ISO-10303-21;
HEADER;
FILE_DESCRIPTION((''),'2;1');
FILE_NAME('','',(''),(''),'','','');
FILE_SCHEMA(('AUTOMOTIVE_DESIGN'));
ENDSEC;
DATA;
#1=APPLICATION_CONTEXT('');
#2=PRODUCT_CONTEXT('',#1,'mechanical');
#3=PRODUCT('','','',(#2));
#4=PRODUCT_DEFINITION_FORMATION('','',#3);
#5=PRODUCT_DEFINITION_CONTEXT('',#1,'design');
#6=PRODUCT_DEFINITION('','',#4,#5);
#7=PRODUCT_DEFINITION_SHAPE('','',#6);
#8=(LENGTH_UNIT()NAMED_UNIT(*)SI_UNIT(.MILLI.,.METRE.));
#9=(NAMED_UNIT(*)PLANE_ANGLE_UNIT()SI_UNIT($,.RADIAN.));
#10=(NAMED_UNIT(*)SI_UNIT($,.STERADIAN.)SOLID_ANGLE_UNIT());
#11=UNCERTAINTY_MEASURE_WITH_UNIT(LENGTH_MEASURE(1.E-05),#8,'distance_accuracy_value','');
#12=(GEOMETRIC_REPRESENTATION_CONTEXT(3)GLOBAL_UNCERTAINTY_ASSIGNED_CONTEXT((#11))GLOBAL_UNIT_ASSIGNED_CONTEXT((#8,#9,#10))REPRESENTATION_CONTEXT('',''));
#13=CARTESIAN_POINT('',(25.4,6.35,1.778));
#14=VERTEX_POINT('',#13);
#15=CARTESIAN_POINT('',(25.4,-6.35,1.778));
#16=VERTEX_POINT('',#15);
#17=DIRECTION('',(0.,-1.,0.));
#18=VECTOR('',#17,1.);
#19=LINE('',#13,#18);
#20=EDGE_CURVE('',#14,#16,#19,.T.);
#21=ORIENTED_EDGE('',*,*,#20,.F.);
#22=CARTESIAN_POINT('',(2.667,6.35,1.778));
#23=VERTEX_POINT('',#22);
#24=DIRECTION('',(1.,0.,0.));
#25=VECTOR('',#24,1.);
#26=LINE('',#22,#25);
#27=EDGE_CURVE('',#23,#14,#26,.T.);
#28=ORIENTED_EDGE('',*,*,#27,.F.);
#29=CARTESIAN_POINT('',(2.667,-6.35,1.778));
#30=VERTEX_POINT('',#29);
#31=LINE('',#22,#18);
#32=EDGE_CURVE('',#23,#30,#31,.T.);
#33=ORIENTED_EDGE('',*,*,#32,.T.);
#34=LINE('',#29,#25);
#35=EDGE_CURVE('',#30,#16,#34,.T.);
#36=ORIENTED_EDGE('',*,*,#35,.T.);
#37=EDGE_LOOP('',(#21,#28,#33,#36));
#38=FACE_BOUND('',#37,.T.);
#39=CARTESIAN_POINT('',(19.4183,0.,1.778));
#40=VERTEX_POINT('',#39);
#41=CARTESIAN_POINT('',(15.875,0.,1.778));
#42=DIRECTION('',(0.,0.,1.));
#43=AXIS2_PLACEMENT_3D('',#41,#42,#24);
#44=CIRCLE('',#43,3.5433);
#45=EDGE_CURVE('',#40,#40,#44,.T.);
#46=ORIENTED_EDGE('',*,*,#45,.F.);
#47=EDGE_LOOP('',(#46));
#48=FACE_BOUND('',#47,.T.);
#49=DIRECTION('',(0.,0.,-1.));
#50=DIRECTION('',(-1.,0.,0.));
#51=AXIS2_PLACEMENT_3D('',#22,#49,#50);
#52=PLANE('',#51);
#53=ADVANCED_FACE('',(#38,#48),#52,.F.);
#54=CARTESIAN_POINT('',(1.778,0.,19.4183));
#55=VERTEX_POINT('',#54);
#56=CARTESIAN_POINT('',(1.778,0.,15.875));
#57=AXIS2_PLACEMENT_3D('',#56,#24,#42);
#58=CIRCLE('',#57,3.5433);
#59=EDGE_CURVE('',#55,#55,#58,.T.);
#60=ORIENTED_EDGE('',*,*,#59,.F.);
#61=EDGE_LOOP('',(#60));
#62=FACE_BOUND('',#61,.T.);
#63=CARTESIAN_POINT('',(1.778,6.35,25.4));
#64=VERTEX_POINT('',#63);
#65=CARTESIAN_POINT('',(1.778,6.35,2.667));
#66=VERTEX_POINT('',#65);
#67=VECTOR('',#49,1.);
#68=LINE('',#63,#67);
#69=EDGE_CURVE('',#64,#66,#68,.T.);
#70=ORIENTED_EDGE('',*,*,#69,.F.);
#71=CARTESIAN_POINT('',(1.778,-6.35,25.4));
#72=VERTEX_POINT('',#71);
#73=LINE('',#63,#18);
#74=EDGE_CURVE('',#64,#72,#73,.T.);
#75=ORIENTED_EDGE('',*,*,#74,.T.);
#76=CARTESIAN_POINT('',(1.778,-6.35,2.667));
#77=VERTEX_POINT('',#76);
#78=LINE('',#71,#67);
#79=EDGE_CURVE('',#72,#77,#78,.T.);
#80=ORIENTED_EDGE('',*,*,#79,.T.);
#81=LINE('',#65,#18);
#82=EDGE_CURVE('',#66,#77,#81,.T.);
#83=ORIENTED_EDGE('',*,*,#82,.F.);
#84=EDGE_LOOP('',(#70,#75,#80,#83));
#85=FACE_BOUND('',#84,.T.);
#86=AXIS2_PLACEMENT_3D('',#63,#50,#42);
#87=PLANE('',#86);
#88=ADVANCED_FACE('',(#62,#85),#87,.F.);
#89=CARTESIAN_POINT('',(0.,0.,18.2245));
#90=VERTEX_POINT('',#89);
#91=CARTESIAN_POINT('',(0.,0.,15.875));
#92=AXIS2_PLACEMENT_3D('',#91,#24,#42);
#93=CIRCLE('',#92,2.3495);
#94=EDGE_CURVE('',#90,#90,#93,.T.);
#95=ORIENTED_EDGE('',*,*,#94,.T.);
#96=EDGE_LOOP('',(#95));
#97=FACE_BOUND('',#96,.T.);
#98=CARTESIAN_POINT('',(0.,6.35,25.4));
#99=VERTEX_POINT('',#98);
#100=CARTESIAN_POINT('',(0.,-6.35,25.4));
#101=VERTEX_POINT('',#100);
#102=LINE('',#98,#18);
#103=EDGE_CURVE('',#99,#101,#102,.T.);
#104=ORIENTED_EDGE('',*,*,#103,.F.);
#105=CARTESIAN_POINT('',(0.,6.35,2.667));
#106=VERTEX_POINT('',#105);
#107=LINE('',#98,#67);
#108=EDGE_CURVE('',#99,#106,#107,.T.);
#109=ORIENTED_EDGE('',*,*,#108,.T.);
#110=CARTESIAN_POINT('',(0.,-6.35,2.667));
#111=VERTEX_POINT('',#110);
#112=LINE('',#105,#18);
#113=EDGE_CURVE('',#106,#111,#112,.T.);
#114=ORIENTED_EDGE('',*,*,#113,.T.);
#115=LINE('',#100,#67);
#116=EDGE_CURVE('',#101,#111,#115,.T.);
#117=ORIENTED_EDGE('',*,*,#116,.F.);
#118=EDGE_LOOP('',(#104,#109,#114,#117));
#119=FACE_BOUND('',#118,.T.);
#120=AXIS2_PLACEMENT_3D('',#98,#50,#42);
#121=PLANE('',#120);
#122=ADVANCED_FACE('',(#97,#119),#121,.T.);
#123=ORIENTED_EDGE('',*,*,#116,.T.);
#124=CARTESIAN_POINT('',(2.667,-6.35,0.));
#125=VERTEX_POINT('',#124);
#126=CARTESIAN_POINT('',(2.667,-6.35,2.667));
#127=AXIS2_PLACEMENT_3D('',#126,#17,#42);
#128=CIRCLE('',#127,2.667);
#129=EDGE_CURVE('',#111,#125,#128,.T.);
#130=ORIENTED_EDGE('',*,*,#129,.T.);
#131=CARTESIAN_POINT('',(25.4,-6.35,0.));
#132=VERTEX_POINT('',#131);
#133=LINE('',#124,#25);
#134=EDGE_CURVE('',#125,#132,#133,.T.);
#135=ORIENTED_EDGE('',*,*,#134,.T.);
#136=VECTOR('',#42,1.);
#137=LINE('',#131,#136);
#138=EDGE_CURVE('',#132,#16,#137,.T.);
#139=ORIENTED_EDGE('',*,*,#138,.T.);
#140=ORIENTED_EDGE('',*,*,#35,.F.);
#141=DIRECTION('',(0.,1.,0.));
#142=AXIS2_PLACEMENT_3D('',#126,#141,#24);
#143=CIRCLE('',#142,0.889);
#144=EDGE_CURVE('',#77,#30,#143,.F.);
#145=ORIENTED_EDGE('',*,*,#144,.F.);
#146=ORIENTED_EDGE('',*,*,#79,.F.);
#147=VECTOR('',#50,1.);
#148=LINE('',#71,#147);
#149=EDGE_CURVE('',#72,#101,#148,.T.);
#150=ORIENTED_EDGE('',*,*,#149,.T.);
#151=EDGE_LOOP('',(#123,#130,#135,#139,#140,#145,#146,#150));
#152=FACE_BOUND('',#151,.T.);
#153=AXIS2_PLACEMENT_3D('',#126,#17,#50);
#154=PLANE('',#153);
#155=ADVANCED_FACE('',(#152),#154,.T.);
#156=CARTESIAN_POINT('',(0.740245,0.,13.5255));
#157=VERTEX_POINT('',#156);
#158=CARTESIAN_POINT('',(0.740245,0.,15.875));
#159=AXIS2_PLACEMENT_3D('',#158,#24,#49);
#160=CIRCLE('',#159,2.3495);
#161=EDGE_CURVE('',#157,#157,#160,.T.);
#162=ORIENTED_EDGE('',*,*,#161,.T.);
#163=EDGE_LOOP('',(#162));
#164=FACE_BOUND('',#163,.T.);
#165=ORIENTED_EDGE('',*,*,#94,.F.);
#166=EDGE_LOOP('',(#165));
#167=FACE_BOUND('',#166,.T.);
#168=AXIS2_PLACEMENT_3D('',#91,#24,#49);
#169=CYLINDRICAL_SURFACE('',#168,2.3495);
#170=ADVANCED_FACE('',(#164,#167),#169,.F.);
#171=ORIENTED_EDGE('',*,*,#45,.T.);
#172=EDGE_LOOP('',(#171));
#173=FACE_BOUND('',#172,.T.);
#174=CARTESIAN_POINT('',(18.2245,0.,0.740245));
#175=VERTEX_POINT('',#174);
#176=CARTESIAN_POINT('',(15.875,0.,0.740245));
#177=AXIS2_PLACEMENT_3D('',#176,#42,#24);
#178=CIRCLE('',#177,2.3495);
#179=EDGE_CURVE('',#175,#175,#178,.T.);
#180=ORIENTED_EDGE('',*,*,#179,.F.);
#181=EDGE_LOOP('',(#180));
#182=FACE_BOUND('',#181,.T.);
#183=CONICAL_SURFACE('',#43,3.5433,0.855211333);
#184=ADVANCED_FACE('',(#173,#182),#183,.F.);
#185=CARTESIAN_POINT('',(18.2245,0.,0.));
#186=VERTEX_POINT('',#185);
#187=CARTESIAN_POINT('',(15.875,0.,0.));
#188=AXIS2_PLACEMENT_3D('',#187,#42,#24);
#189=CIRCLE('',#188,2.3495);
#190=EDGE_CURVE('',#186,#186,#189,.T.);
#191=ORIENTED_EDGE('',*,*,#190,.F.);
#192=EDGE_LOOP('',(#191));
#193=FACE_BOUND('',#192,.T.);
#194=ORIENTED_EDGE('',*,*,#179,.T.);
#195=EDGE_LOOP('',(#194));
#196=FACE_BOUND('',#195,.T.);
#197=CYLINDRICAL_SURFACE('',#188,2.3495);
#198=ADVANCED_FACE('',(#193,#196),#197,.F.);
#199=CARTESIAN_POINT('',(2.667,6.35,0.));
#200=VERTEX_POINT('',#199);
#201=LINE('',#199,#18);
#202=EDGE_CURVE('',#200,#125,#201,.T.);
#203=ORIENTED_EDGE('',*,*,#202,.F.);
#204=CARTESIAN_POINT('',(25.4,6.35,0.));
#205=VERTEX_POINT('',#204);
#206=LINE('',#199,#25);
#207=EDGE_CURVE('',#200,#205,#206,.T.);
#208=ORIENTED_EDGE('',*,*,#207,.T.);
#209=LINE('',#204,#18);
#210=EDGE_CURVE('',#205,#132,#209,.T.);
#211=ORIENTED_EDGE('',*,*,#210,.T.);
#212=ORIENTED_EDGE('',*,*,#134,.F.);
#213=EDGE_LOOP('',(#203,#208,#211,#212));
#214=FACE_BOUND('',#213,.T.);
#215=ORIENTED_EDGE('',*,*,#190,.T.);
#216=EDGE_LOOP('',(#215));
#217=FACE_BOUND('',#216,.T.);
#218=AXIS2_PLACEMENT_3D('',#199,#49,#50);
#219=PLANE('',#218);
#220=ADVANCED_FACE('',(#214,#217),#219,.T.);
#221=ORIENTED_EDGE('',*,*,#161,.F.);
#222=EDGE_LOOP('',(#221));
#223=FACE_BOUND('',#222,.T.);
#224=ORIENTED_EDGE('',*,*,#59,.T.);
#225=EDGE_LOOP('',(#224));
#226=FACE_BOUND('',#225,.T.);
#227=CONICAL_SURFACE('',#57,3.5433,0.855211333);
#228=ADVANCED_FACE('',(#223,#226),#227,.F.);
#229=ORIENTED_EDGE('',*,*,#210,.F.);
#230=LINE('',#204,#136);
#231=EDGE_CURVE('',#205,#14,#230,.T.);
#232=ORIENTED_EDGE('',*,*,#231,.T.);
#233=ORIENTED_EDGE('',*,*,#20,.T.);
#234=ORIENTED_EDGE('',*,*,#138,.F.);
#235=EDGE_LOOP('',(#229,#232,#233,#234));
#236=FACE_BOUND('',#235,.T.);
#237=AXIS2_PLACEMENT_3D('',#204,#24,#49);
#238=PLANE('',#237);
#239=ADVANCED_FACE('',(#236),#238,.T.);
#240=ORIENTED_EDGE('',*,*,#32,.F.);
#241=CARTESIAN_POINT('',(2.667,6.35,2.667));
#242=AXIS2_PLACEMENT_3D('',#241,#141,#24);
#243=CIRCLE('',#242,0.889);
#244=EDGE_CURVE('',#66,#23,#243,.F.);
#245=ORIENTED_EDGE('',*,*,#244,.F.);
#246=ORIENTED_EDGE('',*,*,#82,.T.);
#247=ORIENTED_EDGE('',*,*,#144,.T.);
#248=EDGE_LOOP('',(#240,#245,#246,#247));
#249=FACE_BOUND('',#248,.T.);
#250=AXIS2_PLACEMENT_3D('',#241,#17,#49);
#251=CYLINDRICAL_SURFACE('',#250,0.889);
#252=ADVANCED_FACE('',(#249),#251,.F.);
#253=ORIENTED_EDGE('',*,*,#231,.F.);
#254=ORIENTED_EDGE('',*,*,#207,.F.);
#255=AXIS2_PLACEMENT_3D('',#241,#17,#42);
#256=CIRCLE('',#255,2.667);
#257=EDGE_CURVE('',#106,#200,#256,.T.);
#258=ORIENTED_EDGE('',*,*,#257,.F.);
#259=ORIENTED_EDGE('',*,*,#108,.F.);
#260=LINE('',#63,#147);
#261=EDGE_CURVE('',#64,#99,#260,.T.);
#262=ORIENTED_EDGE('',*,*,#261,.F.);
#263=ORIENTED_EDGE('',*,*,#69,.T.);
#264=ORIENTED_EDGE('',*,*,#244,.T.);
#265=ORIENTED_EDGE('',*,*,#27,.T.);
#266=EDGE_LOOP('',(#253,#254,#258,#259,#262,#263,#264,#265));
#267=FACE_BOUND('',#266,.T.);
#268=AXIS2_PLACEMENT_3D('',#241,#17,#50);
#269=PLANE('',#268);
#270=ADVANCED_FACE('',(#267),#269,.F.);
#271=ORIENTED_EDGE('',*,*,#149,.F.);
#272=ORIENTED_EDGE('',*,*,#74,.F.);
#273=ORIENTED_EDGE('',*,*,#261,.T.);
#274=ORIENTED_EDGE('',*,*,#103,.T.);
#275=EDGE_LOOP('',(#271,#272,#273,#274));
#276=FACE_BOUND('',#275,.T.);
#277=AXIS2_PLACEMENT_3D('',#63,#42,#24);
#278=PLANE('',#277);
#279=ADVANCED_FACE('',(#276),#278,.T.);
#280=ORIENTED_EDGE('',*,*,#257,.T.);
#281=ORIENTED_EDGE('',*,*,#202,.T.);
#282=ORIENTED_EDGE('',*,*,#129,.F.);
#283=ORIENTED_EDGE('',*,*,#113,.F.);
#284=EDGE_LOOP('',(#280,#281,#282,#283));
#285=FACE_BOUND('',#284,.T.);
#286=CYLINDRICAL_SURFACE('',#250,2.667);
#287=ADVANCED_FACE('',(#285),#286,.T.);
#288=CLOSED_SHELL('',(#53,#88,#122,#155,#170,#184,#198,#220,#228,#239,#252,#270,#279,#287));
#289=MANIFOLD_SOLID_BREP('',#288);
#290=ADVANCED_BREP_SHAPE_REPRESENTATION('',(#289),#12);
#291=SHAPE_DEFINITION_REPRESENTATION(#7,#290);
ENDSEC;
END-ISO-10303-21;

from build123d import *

# Parameters (mm, degrees)
EXTRUDE_THIN1_START = -6.35
EXTRUDE_THIN1_DEPTH = 12.7
SKETCH4_R           = 2.3495
EXTRUDE3_DEPTH      = 33.79453796
CIRPATTERN1_COUNT   = 2


# Read off the part's stored shape, not the designer's step: Extrude-Thin1
with BuildPart() as part:
    # Extrude-Thin1 outline → Extrude-Thin1 (new body)
    with BuildSketch(Plane(origin=(0, 0, 0), x_dir=(1, 0, 0), z_dir=(0, 1, 0)).offset(EXTRUDE_THIN1_START)):
        with BuildLine():
            Line((2.667, -1.778), (25.4, -1.778))
            Line((25.4, -1.778), (25.4, 0))
            Line((25.4, 0), (2.667, 0))
            ThreePointArc((2.667, 0), (0.781146215, -0.781146215), (0, -2.667))
            Line((0, -2.667), (0, -25.4))
            Line((0, -25.4), (1.778, -25.4))
            Line((1.778, -25.4), (1.778, -2.667))
            ThreePointArc((1.778, -2.667), (2.038382072, -2.038382072), (2.667, -1.778))
        make_face()
    extrude(amount=EXTRUDE_THIN1_DEPTH)

    # Sketch4 → Extrude3 (cut, through all)
    with BuildSketch(Plane(origin=(3.556, 0, 1.778), x_dir=(1, 0, 0), z_dir=(0, 0, 1))):
        with Locations((12.319, 0)):
            Circle(SKETCH4_R)
        with Locations((-13.081, 0)):
            Circle(SKETCH4_R)
        with Locations((-38.481, 0)):
            Circle(SKETCH4_R)
        with Locations((-63.881, 0)):
            Circle(SKETCH4_R)
    extrude3 = extrude(amount=-EXTRUDE3_DEPTH, mode=Mode.SUBTRACT)

    # Cut-Extrude1 cone 1 section (through the dimple's axis) → Cut-Extrude1 (revolve, cut)
    with BuildSketch(Plane(origin=(15.875, 0, 1.778), x_dir=(0, -1, 0), z_dir=(1, 0, 0))):
        Polygon((0, 0), (3.5433, 0), (0, 3.080143698), align=None)
    cut_extrude1 = revolve(axis=Axis((15.875, 0, 1.778), (0, 0, -1)), mode=Mode.SUBTRACT)

    # CirPattern1: Extrude3, Cut-Extrude1 ×2 about axis
    cirpattern1_axis = Axis((0, 0, 0), (0.7071067811865464, 0, 0.7071067811865487))
    add([extrude3.rotate(cirpattern1_axis, i * 360 / CIRPATTERN1_COUNT) for i in range(1, CIRPATTERN1_COUNT)], mode=Mode.SUBTRACT)
    add([cut_extrude1.rotate(cirpattern1_axis, i * 360 / CIRPATTERN1_COUNT) for i in range(1, CIRPATTERN1_COUNT)], mode=Mode.SUBTRACT)


solid = part.part
